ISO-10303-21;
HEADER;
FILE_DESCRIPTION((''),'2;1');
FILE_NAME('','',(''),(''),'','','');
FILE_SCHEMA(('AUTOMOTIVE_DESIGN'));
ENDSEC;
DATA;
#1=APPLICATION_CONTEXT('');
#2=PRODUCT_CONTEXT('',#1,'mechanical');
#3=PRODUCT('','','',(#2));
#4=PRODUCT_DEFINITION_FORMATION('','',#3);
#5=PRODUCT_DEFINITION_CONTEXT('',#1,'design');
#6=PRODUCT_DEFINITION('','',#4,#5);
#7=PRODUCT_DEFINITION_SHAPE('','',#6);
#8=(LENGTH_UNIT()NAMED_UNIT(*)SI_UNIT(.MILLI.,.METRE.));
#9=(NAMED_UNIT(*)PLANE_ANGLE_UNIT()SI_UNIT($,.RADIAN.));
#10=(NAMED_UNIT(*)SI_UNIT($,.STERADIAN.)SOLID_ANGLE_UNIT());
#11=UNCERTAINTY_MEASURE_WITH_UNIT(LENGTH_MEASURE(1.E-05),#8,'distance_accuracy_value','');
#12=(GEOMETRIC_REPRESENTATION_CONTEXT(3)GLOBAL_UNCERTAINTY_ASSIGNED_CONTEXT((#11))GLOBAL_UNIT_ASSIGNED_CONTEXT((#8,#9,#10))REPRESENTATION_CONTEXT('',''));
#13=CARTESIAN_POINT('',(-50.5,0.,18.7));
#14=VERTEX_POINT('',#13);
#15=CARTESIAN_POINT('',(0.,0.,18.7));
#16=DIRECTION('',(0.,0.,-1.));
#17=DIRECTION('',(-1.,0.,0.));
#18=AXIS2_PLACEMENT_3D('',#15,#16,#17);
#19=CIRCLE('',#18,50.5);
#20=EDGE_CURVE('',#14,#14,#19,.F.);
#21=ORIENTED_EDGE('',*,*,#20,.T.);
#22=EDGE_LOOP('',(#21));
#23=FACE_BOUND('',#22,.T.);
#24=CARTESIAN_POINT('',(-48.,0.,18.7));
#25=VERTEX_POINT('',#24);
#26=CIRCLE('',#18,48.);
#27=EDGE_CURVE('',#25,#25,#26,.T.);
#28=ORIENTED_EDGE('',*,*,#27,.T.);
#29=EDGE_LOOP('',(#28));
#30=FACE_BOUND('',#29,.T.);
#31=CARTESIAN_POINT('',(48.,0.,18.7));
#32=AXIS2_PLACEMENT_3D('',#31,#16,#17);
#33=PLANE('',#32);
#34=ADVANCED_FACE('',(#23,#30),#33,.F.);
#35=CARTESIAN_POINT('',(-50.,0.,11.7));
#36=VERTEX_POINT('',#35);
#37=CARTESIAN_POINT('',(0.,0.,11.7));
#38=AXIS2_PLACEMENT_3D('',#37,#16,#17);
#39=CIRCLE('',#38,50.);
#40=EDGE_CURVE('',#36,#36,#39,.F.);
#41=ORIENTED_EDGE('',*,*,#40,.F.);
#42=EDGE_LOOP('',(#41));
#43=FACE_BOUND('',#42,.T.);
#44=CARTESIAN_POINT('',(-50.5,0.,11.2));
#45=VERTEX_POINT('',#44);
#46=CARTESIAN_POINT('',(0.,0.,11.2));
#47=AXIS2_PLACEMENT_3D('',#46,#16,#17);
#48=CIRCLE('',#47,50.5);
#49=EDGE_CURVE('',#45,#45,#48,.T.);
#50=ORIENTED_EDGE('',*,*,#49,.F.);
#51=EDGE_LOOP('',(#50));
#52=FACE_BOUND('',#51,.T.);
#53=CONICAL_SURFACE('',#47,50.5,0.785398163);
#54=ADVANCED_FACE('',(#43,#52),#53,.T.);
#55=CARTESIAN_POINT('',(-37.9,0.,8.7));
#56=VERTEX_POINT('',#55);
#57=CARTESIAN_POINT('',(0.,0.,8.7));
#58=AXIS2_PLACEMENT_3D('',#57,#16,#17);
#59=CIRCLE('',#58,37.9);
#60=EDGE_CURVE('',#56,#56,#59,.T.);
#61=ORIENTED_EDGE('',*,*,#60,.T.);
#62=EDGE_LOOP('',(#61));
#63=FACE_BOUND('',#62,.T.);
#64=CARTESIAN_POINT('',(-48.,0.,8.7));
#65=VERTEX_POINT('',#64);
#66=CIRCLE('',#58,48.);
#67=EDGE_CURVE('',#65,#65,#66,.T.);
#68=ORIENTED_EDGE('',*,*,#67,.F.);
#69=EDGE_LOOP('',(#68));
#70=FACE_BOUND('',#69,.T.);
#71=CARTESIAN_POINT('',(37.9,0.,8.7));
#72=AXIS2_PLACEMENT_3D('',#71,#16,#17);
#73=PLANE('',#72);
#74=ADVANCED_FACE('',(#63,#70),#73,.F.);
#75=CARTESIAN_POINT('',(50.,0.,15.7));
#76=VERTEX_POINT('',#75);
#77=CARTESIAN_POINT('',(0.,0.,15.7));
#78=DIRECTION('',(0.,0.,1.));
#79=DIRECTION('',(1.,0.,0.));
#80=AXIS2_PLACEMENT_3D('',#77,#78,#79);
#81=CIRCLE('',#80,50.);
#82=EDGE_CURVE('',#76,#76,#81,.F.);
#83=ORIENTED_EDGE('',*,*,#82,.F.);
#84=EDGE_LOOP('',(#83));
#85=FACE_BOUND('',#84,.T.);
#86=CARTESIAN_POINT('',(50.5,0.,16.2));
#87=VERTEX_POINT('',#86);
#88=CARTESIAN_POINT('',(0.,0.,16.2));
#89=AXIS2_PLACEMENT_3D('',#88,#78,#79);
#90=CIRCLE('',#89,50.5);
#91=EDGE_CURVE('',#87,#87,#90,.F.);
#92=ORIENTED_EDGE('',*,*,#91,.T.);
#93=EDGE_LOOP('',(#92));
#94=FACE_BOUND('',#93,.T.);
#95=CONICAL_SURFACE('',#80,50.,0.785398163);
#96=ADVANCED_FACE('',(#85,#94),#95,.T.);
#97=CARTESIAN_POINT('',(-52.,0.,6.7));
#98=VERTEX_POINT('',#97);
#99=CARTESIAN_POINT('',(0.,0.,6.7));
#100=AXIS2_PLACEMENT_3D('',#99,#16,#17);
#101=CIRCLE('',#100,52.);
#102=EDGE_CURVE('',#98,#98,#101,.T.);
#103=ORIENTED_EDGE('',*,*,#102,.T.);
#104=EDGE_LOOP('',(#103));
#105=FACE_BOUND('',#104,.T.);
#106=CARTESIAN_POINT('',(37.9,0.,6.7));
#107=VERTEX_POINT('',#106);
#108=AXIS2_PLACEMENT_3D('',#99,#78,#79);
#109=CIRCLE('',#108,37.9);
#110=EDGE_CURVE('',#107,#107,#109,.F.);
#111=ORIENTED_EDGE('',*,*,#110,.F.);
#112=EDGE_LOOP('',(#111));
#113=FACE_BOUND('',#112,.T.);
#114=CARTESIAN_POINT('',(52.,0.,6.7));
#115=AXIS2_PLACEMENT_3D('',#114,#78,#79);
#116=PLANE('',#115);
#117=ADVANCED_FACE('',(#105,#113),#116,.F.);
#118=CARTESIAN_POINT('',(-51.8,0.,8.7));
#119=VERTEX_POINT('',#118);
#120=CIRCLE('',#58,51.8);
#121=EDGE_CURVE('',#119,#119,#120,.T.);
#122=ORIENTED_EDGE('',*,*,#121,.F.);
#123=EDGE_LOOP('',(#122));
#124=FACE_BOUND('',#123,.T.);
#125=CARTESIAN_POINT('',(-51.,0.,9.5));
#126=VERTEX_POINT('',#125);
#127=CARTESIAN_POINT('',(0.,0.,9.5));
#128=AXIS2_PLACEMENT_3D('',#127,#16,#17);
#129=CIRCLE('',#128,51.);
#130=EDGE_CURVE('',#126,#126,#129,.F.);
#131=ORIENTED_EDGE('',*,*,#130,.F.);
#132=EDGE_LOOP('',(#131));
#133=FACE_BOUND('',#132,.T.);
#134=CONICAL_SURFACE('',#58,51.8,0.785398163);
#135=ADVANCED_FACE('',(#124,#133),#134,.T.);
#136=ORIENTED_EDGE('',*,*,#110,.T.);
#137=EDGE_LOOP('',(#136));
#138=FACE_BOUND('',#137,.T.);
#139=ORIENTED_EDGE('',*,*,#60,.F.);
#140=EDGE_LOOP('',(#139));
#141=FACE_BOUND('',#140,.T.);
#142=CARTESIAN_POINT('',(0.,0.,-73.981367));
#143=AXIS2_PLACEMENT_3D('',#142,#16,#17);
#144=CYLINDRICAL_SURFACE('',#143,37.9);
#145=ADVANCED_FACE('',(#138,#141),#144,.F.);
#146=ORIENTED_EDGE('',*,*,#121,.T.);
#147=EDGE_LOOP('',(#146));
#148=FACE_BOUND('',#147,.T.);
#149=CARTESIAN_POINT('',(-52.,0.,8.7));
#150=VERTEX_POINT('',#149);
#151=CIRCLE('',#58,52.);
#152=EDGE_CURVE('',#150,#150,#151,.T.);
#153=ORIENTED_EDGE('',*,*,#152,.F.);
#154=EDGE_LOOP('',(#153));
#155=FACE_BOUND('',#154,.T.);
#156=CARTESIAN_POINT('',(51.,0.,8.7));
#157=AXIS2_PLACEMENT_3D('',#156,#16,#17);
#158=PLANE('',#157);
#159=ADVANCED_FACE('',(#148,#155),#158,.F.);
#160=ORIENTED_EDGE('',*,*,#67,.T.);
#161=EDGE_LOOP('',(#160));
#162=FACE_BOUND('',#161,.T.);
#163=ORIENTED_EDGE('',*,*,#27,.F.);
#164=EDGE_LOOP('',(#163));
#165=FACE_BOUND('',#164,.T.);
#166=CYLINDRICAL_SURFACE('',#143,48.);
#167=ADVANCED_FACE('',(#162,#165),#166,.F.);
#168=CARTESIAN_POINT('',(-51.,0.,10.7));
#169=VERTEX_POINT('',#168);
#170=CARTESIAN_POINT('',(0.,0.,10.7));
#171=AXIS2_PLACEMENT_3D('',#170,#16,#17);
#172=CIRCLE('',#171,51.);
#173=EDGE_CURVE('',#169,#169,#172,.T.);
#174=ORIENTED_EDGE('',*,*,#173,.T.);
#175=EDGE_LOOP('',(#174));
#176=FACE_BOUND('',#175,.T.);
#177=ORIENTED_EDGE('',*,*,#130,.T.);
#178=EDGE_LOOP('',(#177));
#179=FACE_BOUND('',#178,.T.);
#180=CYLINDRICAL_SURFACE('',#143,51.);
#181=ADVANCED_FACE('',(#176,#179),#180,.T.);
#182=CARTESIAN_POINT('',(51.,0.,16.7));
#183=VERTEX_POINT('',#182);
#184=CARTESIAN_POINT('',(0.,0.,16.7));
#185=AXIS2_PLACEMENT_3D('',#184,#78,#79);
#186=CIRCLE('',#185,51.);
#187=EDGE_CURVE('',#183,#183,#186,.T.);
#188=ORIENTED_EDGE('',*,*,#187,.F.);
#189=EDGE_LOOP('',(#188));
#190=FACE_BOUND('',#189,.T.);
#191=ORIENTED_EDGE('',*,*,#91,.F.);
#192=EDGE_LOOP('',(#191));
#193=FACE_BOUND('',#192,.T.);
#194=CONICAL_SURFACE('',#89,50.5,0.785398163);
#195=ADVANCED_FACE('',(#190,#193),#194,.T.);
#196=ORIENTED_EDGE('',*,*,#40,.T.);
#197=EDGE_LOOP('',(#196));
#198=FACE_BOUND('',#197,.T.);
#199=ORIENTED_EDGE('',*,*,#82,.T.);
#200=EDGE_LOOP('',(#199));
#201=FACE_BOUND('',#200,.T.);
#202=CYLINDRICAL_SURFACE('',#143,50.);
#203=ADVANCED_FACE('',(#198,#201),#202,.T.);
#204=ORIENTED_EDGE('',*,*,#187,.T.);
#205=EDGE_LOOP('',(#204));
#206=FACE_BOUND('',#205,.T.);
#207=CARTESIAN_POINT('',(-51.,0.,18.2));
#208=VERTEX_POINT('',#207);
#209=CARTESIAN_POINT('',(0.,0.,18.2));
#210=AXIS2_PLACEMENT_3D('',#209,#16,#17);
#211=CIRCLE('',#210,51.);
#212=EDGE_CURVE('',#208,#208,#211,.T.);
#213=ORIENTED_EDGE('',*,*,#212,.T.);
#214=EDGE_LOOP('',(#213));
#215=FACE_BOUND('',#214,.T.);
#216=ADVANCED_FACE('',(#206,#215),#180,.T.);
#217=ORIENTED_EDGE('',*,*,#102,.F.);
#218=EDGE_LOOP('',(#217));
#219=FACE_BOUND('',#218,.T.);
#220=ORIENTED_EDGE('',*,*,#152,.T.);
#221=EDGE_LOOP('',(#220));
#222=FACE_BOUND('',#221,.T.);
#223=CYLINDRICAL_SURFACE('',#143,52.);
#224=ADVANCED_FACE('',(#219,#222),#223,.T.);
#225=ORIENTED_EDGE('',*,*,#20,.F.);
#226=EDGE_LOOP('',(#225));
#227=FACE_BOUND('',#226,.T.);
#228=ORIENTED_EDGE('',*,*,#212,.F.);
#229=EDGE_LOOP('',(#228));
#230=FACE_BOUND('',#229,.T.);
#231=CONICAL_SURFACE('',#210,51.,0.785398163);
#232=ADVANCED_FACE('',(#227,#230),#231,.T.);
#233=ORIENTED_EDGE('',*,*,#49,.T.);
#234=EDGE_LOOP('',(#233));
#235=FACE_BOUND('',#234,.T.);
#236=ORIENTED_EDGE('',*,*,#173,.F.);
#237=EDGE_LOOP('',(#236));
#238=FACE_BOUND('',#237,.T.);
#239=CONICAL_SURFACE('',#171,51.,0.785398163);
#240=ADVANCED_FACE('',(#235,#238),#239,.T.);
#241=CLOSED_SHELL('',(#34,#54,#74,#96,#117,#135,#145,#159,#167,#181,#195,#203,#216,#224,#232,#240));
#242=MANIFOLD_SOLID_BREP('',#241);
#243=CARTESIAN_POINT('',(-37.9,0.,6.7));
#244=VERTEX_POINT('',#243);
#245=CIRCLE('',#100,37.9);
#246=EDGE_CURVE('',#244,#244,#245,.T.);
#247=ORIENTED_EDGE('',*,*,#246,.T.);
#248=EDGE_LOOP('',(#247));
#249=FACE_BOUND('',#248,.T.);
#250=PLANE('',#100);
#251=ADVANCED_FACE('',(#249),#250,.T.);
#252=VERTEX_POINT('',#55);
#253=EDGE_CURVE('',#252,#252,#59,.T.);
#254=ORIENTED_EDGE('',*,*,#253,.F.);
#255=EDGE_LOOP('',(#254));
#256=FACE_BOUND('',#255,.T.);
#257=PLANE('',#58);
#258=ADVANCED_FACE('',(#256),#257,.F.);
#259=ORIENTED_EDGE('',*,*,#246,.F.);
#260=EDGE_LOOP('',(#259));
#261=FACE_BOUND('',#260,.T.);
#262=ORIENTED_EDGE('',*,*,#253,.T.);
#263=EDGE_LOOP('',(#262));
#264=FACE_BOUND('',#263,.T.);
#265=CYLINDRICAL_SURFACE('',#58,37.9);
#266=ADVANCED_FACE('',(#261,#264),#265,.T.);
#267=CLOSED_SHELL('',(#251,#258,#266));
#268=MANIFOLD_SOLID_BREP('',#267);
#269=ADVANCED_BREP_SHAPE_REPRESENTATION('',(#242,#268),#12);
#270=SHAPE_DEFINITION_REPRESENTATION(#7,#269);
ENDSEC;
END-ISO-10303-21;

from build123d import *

# Parameters (mm, degrees)
CHAMFER1_SIZE           = 0.5
CHAMFER2_SIZE           = 0.8
CUT_EXTRUDE1_DEPTH      = 76.879443857
CUT_EXTRUDE1_DEPTH_BACK = 76.879443857
SKETCH3_W               = 104.560873996
SKETCH3_H               = 26.139248716
SKETCH4_R               = 37.9
BOSS_EXTRUDE1_DEPTH     = 2


with BuildPart() as part:
    # Sketch1 → Revolve1 (revolve)
    with BuildSketch(Plane(origin=(0, 0, 0), x_dir=(1, 0, 0), z_dir=(0, 1, 0)), mode=Mode.PRIVATE) as revolve1_sk:
        Polygon((37.9, 0), (37.9, -8.7), (48, -8.7), (48, -18.7), (51, -18.7), (51, -16.2), (50, -16.2), (50, -11.2), (51, -11.2), (51, -8.7), (52, -8.7), (52, -6.7), (39.9, -6.7), (39.9, 0), align=None)
    revolve(revolve1_sk.sketch.rotate(Axis((0, 0, -73.981367368), (0, 0, 1)), 180), axis=Axis((0, 0, -73.981367368), (0, 0, 1)))

    # Chamfer1
    chamfer1_edges = [part.edges().sort_by_distance(p)[0] for p in [
        (51, 0, 11.2),
        (50, 0, 11.2),
        (50, 0, 16.2),
        (51, 0, 16.2),
        (51, 0, 18.7),
        (39.9, 0, 0),
    ]]
    chamfer(chamfer1_edges, length=CHAMFER1_SIZE - 0.0001)  # a hair under: the kernel refuses the full size

    # Chamfer2
    chamfer2_edges = [part.edges().sort_by_distance(p)[0] for p in [
        (51, 0, 8.7),
    ]]
    chamfer(chamfer2_edges, length=CHAMFER2_SIZE)

    # Sketch3 → Cut-Extrude1 (cut, two sides: drawn at the far end of the back side and taken through both)
    with BuildSketch(Plane(origin=(0, 0, 0), x_dir=(1, 0, 0), z_dir=(0, 1, 0)).offset(-CUT_EXTRUDE1_DEPTH_BACK)):
        with Locations((3.61950671, 6.369624358)):
            Rectangle(SKETCH3_W, SKETCH3_H)
    extrude(amount=CUT_EXTRUDE1_DEPTH + CUT_EXTRUDE1_DEPTH_BACK, mode=Mode.SUBTRACT)


with BuildPart() as body_2:
    # Sketch4 → Boss-Extrude1 (new body)
    with BuildSketch(Plane(origin=(0, 0, 6.7), x_dir=(-1, 0, 0), z_dir=(0, 0, -1))):
        Circle(SKETCH4_R)
    extrude(amount=-BOSS_EXTRUDE1_DEPTH)


solid = Compound([part.part, body_2.part])
